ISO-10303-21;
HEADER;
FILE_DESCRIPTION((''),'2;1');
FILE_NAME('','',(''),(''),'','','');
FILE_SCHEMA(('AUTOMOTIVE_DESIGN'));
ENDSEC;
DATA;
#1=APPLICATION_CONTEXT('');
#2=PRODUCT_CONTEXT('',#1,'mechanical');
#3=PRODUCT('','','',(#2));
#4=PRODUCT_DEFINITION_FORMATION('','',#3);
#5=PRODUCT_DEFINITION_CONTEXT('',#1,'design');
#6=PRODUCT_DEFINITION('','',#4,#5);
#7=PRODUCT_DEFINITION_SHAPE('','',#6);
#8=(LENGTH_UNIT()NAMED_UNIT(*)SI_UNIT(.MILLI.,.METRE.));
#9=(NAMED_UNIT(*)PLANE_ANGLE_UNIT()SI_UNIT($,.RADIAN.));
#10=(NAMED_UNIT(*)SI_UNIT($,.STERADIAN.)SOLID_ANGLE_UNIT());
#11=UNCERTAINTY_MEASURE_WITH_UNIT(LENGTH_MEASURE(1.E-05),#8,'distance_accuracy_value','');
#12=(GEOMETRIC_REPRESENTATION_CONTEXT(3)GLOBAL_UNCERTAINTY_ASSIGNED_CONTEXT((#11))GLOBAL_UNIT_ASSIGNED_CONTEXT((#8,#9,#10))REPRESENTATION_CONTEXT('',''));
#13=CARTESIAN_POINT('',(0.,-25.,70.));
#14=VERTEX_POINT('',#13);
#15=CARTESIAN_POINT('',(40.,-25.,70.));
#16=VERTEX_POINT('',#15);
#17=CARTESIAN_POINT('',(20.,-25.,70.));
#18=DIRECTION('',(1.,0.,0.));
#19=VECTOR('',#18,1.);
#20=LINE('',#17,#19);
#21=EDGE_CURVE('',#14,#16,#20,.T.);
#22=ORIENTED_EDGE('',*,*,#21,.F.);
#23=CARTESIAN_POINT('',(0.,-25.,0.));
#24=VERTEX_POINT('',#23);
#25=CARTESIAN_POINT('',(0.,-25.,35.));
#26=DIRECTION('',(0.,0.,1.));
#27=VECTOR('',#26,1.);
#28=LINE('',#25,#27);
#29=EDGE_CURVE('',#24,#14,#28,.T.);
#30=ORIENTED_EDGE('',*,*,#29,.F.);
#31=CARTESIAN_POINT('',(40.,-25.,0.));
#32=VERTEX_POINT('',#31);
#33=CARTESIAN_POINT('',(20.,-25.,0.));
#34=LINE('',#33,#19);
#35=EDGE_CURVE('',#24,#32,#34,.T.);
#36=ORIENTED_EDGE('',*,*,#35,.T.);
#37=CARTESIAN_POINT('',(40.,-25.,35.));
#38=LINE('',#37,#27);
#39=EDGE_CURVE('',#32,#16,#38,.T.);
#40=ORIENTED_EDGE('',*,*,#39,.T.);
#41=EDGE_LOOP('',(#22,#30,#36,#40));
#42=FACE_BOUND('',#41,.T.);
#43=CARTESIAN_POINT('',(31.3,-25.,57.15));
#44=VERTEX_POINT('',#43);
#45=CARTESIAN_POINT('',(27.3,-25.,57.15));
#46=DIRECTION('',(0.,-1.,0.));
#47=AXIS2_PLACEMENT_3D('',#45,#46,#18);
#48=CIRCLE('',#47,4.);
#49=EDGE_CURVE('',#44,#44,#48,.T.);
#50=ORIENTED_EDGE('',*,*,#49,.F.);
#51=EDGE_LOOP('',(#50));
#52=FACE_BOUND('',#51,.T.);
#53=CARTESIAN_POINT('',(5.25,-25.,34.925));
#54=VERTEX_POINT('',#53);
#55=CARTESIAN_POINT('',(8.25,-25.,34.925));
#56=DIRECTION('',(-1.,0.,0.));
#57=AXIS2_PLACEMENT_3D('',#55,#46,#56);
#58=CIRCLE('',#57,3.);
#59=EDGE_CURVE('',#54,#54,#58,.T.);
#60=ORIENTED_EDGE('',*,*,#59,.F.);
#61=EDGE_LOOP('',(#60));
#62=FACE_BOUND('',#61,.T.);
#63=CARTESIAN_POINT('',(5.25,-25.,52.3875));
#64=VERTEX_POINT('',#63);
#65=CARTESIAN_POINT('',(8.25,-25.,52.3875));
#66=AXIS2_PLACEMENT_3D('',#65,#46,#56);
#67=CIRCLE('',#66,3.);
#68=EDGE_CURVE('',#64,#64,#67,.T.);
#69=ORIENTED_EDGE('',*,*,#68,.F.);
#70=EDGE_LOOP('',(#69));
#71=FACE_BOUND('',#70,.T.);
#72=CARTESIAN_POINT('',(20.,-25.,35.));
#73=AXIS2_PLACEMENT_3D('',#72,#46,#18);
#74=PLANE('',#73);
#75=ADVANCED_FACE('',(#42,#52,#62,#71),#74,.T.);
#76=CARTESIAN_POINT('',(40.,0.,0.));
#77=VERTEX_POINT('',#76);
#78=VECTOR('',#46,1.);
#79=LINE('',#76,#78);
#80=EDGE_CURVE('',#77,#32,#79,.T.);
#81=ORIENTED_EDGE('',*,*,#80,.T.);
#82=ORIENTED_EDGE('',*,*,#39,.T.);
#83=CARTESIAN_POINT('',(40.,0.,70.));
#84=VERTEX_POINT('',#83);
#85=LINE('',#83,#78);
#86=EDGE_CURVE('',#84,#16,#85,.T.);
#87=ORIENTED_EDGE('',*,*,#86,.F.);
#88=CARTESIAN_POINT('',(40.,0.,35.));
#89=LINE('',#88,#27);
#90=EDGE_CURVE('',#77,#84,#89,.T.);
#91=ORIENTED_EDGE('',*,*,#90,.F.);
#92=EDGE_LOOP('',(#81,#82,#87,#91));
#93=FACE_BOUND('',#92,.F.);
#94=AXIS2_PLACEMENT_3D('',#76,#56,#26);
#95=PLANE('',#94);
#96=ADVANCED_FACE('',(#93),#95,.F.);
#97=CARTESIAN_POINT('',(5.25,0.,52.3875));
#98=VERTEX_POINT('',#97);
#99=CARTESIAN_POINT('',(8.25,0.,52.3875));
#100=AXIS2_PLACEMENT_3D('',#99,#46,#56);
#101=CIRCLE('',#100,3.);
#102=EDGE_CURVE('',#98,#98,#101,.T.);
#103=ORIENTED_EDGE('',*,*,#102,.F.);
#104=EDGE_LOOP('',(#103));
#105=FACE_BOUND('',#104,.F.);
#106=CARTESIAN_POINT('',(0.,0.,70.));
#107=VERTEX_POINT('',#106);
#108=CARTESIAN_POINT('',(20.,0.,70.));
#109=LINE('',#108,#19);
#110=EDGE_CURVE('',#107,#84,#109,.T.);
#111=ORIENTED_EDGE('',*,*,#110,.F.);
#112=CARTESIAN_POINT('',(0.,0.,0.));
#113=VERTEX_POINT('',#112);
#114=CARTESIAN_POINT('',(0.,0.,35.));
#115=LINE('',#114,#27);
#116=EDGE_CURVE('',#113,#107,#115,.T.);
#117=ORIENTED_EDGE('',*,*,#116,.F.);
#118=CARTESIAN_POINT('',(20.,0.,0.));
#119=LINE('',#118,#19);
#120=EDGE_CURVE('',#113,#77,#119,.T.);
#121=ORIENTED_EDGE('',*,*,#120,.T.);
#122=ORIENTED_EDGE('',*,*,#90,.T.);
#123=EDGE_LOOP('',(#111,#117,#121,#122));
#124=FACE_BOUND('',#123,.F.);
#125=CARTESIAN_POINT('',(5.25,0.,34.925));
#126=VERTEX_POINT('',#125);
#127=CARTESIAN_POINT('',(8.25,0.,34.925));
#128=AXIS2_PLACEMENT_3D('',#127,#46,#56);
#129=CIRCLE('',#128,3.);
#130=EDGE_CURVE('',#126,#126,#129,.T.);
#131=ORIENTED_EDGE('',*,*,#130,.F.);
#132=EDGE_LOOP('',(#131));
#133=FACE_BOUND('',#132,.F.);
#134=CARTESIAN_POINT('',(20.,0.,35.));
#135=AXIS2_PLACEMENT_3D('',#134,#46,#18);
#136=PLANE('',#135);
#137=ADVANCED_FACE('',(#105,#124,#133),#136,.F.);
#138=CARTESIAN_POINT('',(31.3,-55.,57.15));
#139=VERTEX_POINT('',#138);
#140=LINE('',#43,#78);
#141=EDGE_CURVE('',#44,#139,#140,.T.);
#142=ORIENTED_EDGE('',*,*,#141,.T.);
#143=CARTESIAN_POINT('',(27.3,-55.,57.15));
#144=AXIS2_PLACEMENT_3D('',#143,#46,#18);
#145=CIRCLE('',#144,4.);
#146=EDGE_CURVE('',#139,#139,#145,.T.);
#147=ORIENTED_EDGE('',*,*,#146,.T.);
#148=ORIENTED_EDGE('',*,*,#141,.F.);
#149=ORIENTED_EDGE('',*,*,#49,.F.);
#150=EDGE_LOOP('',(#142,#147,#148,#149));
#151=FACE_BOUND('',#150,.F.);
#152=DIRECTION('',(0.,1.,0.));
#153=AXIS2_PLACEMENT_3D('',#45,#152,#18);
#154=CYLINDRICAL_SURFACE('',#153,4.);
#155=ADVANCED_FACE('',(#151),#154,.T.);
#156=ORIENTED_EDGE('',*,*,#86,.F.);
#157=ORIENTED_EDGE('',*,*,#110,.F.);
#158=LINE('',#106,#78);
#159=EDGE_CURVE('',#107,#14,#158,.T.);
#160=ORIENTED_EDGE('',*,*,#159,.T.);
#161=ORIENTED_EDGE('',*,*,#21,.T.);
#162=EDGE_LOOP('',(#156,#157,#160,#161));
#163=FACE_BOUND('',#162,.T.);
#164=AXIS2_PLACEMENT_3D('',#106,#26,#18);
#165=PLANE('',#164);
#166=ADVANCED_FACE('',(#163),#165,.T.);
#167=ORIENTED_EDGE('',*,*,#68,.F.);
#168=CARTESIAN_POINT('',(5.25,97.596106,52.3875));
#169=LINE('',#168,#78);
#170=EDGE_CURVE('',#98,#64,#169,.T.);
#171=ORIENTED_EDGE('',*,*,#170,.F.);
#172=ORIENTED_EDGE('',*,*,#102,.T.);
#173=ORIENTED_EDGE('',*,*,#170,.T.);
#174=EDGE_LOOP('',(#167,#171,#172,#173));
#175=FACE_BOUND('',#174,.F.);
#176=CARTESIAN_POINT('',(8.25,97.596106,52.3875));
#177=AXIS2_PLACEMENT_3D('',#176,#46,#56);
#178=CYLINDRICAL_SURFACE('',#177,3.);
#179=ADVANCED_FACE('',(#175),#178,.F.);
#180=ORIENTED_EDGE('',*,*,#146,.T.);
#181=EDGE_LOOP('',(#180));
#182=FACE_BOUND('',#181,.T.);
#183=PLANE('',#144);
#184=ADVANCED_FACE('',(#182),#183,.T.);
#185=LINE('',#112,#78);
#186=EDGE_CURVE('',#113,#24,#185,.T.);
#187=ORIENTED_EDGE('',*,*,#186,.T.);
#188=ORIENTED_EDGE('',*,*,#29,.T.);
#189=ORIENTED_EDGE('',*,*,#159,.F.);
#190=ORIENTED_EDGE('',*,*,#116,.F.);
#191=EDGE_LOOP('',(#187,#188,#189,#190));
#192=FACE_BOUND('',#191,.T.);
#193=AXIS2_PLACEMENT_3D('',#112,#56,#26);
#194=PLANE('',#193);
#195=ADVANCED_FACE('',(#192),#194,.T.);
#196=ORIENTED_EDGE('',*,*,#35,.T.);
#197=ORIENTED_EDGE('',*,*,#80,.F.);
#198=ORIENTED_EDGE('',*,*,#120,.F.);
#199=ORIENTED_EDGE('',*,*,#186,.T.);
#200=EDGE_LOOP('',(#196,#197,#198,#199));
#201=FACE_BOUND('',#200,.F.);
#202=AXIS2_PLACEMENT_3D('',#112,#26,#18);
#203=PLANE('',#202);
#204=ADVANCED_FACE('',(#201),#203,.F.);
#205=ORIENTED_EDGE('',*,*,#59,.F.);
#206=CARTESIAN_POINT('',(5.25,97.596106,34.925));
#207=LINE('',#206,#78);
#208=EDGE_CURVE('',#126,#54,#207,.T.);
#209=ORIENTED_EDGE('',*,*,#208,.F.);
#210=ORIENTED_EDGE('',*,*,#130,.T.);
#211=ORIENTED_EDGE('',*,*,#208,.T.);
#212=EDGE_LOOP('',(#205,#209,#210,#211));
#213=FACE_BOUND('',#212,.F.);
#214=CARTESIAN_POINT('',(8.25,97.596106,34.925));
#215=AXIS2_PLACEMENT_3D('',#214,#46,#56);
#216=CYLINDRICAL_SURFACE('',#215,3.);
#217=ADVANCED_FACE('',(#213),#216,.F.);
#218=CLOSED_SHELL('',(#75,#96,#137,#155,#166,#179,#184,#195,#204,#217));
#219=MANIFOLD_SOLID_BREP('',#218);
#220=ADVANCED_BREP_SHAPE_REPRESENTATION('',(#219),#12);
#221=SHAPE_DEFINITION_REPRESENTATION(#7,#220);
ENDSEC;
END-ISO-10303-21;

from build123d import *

# Parameters (mm, degrees)
F0_W     = 40
F0_H     = 70
F1_DEPTH = 25
F2_R     = 4
F3_DEPTH = 30
F6_D     = 6


# Not quite as in the source:
# - the program builds the solid bodies; features that only make, move or delete a surface that nothing else refers to are left out


with BuildPart() as f1:
    # F0 (on Front) → F1 (new body)
    with BuildSketch(Plane.XZ):
        with Locations((20, 35)):
            Rectangle(F0_W, F0_H)
    extrude(amount=F1_DEPTH)

    # F2 (on face) → F3 (join)
    with BuildSketch(Plane.XZ.offset(25)):
        with Locations((27.3, 57.15)):
            Circle(F2_R)
    extrude(amount=F3_DEPTH)

    # F6 (through all)
    with Locations(Plane(origin=(0, 0, 0), x_dir=(1, 0, 0), z_dir=(0, 1, 0))):
        with Locations((8.25, -52.3875), (8.25, -34.925)):
            Hole(F6_D / 2)


solid = f1.part
